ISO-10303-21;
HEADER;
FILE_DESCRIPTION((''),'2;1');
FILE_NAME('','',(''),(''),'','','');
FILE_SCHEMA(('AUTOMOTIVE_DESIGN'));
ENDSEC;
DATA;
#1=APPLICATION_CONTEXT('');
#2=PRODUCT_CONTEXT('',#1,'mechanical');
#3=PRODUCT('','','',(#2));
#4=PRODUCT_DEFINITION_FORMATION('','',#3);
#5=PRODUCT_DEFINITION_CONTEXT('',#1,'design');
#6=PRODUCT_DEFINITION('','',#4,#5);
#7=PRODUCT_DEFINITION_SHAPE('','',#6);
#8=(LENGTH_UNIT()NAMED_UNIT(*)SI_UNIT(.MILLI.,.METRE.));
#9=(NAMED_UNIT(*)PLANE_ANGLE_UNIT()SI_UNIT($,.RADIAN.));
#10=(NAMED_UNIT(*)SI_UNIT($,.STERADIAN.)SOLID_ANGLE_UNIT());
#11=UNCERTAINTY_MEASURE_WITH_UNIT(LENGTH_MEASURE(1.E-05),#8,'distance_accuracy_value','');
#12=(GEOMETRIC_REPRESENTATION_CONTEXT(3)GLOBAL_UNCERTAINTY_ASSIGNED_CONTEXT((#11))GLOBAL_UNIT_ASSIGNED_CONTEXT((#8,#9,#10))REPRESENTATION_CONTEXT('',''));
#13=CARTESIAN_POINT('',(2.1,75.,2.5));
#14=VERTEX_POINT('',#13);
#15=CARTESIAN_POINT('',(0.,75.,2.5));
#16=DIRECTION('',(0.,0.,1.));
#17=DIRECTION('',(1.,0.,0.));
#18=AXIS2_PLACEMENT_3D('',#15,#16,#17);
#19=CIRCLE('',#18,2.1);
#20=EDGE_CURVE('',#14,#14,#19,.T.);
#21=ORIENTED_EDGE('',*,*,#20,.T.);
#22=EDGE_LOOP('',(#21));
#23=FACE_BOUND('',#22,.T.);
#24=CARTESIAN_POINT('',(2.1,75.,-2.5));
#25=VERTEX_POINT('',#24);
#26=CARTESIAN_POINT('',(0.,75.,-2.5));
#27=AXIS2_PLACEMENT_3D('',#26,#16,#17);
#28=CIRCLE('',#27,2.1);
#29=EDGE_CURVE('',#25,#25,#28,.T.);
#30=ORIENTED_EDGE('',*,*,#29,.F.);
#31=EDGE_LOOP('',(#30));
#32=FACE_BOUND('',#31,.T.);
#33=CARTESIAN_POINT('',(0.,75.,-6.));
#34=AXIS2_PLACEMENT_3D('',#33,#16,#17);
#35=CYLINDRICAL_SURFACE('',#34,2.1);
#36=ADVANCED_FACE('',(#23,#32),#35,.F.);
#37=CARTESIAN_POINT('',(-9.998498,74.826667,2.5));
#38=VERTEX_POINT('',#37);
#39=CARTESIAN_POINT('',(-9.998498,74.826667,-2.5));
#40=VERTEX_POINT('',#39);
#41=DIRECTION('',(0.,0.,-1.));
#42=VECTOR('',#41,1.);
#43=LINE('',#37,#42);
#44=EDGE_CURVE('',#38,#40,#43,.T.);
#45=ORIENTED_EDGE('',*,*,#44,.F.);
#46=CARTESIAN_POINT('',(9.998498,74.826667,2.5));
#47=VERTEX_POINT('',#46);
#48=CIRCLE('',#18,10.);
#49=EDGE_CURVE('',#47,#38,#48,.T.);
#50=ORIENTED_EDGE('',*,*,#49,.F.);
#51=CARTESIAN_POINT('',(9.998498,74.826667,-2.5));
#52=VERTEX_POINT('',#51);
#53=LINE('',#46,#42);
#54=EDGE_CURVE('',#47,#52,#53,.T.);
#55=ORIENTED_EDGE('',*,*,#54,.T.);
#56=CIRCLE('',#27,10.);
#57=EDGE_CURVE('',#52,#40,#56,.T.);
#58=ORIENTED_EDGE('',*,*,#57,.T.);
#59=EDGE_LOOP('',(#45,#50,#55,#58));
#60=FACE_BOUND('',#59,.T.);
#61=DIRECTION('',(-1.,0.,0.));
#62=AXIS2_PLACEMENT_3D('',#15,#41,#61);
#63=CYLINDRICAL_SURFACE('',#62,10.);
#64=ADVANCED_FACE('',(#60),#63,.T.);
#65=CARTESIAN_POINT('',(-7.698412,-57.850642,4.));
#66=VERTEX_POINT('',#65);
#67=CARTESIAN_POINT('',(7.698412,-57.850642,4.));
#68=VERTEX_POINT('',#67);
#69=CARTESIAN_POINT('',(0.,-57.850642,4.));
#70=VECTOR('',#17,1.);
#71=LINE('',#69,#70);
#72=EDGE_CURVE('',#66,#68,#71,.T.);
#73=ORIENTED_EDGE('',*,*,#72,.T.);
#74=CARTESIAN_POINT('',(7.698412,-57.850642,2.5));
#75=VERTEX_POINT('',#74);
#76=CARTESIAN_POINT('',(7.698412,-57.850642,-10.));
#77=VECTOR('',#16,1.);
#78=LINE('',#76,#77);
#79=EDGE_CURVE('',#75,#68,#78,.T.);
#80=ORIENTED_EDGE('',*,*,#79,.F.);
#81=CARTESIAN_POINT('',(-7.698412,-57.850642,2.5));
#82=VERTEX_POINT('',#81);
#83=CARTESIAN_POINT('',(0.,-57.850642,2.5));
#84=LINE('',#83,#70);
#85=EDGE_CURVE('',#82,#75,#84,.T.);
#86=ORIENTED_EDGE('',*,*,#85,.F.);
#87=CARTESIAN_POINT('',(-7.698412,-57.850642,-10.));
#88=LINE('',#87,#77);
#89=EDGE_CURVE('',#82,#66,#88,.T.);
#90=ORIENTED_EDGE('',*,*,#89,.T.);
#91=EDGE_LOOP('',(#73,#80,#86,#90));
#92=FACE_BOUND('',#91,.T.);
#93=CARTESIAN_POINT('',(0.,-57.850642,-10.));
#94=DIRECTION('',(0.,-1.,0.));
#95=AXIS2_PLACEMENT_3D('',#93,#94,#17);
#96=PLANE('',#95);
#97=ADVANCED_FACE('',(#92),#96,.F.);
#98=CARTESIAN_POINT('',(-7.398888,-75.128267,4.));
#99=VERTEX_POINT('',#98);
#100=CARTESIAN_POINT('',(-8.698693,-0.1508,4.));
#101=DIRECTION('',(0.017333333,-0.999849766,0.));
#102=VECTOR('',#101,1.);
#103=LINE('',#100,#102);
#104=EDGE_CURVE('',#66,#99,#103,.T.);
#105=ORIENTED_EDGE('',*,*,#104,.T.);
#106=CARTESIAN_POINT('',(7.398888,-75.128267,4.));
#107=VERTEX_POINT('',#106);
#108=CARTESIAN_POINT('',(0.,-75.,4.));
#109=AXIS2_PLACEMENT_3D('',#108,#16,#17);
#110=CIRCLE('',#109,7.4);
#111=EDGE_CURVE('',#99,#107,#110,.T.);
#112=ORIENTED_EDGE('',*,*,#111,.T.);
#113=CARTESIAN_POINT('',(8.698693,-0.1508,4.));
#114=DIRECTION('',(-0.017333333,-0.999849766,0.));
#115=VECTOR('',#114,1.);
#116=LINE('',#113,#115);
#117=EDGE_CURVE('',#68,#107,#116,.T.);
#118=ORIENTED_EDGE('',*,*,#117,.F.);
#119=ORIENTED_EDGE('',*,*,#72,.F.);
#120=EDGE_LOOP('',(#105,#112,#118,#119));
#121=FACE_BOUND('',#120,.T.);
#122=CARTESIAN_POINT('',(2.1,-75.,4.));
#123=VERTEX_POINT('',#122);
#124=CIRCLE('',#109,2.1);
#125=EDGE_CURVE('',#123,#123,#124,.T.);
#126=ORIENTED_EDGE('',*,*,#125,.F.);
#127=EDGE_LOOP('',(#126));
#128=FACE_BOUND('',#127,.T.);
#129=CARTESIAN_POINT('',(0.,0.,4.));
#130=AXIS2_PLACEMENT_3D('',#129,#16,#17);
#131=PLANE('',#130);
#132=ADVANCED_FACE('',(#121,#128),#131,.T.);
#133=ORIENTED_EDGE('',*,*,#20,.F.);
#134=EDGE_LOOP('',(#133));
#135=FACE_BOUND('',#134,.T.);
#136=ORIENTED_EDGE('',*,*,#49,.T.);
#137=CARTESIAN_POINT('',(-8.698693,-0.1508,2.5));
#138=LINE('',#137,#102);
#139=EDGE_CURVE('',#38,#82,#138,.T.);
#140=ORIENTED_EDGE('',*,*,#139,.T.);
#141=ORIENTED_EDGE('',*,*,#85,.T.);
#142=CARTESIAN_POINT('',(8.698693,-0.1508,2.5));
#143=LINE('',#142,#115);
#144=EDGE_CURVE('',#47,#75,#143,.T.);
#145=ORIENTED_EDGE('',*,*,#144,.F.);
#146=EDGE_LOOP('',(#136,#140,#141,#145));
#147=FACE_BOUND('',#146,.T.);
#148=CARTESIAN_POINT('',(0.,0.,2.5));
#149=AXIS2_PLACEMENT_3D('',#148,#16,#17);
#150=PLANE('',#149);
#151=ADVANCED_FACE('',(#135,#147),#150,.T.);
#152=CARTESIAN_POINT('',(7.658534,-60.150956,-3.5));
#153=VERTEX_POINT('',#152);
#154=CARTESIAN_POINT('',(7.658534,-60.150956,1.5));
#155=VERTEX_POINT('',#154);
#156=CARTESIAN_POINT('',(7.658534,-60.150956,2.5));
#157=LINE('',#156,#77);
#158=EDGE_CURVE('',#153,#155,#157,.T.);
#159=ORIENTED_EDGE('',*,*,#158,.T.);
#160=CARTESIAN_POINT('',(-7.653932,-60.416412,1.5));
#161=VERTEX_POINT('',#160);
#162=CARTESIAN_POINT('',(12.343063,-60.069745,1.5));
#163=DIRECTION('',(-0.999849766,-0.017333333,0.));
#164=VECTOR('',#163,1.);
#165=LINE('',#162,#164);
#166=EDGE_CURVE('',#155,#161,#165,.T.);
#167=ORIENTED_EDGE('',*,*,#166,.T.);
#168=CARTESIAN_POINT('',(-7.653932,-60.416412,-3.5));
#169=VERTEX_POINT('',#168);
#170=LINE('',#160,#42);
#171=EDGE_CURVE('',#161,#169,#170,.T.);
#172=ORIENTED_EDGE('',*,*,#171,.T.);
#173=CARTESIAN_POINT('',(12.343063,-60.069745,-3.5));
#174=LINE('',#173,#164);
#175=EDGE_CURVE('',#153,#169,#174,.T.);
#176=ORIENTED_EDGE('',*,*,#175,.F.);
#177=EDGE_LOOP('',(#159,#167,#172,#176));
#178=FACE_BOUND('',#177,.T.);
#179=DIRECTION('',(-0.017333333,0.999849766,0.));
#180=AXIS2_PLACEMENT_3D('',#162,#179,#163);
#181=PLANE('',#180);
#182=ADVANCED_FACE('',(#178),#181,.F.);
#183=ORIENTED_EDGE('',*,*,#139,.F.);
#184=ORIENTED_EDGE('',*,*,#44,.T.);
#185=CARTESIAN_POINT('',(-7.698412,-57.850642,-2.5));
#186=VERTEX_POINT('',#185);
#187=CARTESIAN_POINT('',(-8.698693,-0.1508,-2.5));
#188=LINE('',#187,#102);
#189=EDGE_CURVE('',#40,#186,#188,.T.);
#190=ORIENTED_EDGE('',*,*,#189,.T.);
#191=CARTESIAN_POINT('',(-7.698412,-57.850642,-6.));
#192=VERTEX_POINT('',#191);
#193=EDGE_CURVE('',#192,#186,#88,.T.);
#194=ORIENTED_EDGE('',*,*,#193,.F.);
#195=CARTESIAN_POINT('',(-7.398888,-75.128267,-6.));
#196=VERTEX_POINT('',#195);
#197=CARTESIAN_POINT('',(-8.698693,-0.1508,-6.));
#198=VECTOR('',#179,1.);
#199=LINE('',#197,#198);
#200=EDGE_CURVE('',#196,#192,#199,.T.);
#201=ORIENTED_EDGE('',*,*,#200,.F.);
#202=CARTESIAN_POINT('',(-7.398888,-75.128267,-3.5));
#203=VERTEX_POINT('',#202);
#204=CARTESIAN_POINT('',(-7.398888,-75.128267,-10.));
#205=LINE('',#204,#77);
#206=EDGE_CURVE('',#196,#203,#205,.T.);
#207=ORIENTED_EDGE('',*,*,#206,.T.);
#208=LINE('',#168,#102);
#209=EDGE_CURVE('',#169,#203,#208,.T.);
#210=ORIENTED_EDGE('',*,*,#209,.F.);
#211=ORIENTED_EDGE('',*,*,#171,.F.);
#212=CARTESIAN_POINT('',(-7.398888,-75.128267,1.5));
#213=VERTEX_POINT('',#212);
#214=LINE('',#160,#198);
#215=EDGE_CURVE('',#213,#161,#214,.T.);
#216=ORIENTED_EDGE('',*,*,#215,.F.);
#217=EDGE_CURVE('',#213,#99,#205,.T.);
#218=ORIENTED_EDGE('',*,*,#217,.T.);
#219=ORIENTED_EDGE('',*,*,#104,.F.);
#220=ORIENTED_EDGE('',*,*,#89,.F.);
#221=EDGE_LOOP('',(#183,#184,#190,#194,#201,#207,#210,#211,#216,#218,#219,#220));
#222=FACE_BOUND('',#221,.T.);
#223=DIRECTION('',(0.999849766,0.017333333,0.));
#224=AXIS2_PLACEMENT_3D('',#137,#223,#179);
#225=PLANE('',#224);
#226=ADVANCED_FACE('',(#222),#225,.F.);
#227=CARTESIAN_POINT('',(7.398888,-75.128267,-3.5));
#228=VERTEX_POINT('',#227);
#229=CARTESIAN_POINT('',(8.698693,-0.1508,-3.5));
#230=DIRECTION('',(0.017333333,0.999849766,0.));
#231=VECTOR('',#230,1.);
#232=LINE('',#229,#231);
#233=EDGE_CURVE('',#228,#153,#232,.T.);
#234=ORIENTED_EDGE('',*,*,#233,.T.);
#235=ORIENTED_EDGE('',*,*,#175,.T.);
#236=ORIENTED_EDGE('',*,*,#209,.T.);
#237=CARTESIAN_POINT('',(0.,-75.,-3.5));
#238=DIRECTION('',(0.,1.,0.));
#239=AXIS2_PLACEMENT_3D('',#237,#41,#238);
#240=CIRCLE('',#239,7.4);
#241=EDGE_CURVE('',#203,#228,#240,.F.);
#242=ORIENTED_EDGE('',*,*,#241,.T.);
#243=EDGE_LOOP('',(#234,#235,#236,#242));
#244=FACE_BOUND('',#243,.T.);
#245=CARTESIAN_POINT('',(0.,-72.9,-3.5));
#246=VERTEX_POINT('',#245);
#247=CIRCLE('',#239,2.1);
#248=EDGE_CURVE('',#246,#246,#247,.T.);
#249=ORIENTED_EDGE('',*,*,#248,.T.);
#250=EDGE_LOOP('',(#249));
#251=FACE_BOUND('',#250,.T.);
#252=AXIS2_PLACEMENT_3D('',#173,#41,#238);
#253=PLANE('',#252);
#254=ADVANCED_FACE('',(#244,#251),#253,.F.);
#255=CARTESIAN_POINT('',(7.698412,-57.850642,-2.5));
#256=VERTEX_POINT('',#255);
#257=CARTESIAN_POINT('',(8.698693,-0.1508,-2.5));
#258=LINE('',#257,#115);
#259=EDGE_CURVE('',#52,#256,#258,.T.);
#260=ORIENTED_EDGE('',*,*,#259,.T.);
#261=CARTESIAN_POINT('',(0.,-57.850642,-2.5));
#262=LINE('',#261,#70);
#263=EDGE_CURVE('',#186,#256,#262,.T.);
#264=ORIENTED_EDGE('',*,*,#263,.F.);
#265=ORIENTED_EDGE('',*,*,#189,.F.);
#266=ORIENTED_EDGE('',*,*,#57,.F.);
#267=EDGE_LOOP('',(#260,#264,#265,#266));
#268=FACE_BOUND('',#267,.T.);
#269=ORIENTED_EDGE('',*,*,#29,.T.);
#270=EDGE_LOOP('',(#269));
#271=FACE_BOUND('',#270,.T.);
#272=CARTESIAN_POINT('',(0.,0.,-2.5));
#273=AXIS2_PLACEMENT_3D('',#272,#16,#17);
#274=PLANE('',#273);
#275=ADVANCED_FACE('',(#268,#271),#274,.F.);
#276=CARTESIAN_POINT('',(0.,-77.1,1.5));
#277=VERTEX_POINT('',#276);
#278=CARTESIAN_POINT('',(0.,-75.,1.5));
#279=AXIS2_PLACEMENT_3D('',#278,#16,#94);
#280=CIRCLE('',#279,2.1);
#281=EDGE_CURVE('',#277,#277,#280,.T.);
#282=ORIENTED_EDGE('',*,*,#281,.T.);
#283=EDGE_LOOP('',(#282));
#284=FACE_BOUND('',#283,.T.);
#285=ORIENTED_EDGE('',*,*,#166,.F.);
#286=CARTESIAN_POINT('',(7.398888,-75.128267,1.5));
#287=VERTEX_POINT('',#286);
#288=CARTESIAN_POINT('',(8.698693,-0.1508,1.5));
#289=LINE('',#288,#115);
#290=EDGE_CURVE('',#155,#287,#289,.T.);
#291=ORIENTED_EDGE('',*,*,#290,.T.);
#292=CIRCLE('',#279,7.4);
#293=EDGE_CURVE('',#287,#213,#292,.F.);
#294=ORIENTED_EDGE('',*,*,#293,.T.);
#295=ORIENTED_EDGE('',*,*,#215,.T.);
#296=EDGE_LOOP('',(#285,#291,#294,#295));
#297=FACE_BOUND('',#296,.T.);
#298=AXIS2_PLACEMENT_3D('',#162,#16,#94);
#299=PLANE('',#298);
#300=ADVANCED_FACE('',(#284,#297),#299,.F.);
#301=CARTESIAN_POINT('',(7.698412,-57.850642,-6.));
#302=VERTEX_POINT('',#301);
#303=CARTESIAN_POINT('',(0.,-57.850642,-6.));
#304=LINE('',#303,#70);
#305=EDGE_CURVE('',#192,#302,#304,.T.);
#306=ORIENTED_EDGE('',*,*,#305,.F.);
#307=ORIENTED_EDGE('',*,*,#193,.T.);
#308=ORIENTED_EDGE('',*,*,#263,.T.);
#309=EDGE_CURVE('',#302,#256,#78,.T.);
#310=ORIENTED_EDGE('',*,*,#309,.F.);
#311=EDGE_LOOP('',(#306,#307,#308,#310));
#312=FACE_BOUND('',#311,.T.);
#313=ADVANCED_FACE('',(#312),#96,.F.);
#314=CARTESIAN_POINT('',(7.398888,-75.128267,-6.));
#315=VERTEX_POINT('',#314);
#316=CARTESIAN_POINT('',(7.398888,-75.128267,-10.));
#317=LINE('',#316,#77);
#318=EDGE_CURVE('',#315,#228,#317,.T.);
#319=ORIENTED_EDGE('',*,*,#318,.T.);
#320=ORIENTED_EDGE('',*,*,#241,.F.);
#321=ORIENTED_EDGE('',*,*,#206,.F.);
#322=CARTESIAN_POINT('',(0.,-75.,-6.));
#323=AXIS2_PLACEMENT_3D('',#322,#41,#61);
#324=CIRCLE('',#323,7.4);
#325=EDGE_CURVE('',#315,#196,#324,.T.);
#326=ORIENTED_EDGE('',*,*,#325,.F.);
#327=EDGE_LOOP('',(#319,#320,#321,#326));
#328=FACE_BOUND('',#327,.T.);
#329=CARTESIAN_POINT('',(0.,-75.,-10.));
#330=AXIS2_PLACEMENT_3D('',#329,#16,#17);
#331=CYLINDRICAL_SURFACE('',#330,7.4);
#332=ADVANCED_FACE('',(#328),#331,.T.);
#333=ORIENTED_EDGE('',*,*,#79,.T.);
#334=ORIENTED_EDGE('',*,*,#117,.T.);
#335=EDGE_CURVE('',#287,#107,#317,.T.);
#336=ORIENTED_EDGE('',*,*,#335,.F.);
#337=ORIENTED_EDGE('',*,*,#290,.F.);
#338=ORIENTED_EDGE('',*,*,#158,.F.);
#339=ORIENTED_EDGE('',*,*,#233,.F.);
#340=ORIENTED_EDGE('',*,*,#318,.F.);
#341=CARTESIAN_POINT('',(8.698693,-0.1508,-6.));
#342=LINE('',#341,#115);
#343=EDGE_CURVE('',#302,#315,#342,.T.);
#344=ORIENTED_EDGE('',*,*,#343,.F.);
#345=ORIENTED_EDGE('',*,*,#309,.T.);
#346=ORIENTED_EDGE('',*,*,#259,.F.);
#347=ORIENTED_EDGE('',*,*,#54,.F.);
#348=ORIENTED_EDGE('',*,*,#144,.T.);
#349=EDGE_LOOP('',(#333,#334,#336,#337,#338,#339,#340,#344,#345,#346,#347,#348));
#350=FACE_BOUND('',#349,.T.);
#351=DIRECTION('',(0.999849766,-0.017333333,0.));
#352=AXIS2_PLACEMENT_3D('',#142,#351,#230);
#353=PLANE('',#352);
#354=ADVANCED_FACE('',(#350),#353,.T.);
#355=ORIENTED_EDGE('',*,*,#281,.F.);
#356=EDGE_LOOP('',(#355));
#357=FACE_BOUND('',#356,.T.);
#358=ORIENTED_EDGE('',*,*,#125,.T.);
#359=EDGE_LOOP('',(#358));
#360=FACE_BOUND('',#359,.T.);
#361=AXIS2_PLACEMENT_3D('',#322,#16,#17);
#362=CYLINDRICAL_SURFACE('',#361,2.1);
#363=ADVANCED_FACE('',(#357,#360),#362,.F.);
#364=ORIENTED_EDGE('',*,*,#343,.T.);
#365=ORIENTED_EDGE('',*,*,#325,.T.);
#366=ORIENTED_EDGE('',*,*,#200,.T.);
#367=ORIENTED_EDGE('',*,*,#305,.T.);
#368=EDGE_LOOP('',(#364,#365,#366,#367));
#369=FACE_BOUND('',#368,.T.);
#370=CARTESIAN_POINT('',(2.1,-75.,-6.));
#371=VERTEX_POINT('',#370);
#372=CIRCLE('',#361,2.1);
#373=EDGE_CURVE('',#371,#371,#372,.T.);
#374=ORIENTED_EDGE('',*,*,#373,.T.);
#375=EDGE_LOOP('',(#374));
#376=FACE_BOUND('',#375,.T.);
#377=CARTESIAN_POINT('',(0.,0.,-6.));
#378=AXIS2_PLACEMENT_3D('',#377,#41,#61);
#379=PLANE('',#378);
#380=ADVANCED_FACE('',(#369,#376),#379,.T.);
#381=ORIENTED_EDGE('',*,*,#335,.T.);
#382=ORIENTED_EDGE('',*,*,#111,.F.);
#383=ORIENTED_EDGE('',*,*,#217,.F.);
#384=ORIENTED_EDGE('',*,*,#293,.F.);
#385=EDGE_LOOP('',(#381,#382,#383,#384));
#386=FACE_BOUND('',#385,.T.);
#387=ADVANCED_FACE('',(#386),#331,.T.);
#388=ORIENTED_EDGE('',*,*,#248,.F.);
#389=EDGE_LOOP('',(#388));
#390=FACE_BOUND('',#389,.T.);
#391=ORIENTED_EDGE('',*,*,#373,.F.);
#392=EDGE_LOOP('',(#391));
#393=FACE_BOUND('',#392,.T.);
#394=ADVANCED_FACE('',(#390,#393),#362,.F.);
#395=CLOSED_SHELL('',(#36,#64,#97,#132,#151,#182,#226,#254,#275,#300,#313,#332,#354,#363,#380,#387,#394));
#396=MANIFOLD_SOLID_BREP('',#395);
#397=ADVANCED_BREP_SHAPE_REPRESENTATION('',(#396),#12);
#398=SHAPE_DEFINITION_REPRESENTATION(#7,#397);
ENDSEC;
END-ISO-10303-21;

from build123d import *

# Parameters (mm, degrees)
BOSS_EXTRUDE1_DEPTH      = 2.5
SKETCH1_R                = 7.4
BOSS_EXTRUDE1_2_DEPTH    = 2.5
BOSS_EXTRUDE4_DEPTH      = 4
BOSS_EXTRUDE4_DEPTH_BACK = 10
SKETCH2_W                = 5
SKETCH2_H                = 25.381176
CUT_EXTRUDE1_DEPTH       = 20
CUT_EXTRUDE2_DEPTH       = 4
SKETCH4_R                = 2.1
CUT_EXTRUDE3_DEPTH       = 87.16844


with BuildPart() as part:
    # Sketch1 → Boss-Extrude1 (new, symmetric)
    with BuildSketch(Plane.XY):
        with BuildLine():
            Line((7.698412, -57.850642), (9.998498, 74.826667))
            ThreePointArc((9.998498, 74.826667), (0, 85), (-9.998498, 74.826667))
            Line((-9.998498, 74.826667), (-7.698412, -57.850642))
            Line((-7.698412, -57.850642), (7.698412, -57.850642))
        make_face()
    extrude(amount=BOSS_EXTRUDE1_DEPTH, both=True)



with BuildPart() as body_2:
    # Sketch1 → Boss-Extrude1 2 (new, symmetric)
    with BuildSketch(Plane.XY):
        with Locations((0, -75)):
            Circle(SKETCH1_R)
    extrude(amount=BOSS_EXTRUDE1_2_DEPTH, both=True)


with BuildPart() as part_1:
    add(part.part)

    add(body_2.part)  # Boss-Extrude4 merges body 2
    # Sketch1<6> → Boss-Extrude4 (add, two sides: drawn at the far end of the back side and taken through both)
    with BuildSketch(Plane.XY.offset(-BOSS_EXTRUDE4_DEPTH_BACK)):
        with BuildLine():
            Line((7.698412, -57.850642), (-7.698412, -57.850642))
            Line((-7.698412, -57.850642), (-7.398888, -75.128267))
            ThreePointArc((-7.398888, -75.128267), (0, -82.4), (7.398888, -75.128267))
            Line((7.398888, -75.128267), (7.698412, -57.850642))
        make_face()
    extrude(amount=BOSS_EXTRUDE4_DEPTH + BOSS_EXTRUDE4_DEPTH_BACK)

    # Sketch2 → Cut-Extrude1 (cut)
    with BuildSketch(Plane(origin=(-8.698693, -0.1508, 0), x_dir=(0, 0, 1), z_dir=(-0.9998497664927245, -0.017333333333333607, 0))):
        with Locations((-1, -72.965255)):
            Rectangle(SKETCH2_W, SKETCH2_H)
    extrude(amount=-CUT_EXTRUDE1_DEPTH, mode=Mode.SUBTRACT)

    # Sketch3 → Cut-Extrude2 (cut)
    with BuildSketch(Plane(origin=(0, 0, -10), x_dir=(-1, 0, 0), z_dir=(0, 0, -1))):
        with BuildLine():
            Line((-7.698412, -57.850642), (-7.398888, -75.128267))
            ThreePointArc((-7.398888, -75.128267), (0, -82.4), (7.398888, -75.128267))
            Line((7.398888, -75.128267), (7.698412, -57.850642))
            Line((7.698412, -57.850642), (-7.698412, -57.850642))
        make_face()
    extrude(amount=-CUT_EXTRUDE2_DEPTH, mode=Mode.SUBTRACT)

    # Sketch4 → Cut-Extrude3 (cut, through all)
    with BuildSketch(Plane.XY.offset(4)):
        with Locations((0, 75)):
            Circle(SKETCH4_R)
        with Locations((0, -75)):
            Circle(SKETCH4_R)
    extrude(amount=-CUT_EXTRUDE3_DEPTH, mode=Mode.SUBTRACT)


solid = part_1.part
